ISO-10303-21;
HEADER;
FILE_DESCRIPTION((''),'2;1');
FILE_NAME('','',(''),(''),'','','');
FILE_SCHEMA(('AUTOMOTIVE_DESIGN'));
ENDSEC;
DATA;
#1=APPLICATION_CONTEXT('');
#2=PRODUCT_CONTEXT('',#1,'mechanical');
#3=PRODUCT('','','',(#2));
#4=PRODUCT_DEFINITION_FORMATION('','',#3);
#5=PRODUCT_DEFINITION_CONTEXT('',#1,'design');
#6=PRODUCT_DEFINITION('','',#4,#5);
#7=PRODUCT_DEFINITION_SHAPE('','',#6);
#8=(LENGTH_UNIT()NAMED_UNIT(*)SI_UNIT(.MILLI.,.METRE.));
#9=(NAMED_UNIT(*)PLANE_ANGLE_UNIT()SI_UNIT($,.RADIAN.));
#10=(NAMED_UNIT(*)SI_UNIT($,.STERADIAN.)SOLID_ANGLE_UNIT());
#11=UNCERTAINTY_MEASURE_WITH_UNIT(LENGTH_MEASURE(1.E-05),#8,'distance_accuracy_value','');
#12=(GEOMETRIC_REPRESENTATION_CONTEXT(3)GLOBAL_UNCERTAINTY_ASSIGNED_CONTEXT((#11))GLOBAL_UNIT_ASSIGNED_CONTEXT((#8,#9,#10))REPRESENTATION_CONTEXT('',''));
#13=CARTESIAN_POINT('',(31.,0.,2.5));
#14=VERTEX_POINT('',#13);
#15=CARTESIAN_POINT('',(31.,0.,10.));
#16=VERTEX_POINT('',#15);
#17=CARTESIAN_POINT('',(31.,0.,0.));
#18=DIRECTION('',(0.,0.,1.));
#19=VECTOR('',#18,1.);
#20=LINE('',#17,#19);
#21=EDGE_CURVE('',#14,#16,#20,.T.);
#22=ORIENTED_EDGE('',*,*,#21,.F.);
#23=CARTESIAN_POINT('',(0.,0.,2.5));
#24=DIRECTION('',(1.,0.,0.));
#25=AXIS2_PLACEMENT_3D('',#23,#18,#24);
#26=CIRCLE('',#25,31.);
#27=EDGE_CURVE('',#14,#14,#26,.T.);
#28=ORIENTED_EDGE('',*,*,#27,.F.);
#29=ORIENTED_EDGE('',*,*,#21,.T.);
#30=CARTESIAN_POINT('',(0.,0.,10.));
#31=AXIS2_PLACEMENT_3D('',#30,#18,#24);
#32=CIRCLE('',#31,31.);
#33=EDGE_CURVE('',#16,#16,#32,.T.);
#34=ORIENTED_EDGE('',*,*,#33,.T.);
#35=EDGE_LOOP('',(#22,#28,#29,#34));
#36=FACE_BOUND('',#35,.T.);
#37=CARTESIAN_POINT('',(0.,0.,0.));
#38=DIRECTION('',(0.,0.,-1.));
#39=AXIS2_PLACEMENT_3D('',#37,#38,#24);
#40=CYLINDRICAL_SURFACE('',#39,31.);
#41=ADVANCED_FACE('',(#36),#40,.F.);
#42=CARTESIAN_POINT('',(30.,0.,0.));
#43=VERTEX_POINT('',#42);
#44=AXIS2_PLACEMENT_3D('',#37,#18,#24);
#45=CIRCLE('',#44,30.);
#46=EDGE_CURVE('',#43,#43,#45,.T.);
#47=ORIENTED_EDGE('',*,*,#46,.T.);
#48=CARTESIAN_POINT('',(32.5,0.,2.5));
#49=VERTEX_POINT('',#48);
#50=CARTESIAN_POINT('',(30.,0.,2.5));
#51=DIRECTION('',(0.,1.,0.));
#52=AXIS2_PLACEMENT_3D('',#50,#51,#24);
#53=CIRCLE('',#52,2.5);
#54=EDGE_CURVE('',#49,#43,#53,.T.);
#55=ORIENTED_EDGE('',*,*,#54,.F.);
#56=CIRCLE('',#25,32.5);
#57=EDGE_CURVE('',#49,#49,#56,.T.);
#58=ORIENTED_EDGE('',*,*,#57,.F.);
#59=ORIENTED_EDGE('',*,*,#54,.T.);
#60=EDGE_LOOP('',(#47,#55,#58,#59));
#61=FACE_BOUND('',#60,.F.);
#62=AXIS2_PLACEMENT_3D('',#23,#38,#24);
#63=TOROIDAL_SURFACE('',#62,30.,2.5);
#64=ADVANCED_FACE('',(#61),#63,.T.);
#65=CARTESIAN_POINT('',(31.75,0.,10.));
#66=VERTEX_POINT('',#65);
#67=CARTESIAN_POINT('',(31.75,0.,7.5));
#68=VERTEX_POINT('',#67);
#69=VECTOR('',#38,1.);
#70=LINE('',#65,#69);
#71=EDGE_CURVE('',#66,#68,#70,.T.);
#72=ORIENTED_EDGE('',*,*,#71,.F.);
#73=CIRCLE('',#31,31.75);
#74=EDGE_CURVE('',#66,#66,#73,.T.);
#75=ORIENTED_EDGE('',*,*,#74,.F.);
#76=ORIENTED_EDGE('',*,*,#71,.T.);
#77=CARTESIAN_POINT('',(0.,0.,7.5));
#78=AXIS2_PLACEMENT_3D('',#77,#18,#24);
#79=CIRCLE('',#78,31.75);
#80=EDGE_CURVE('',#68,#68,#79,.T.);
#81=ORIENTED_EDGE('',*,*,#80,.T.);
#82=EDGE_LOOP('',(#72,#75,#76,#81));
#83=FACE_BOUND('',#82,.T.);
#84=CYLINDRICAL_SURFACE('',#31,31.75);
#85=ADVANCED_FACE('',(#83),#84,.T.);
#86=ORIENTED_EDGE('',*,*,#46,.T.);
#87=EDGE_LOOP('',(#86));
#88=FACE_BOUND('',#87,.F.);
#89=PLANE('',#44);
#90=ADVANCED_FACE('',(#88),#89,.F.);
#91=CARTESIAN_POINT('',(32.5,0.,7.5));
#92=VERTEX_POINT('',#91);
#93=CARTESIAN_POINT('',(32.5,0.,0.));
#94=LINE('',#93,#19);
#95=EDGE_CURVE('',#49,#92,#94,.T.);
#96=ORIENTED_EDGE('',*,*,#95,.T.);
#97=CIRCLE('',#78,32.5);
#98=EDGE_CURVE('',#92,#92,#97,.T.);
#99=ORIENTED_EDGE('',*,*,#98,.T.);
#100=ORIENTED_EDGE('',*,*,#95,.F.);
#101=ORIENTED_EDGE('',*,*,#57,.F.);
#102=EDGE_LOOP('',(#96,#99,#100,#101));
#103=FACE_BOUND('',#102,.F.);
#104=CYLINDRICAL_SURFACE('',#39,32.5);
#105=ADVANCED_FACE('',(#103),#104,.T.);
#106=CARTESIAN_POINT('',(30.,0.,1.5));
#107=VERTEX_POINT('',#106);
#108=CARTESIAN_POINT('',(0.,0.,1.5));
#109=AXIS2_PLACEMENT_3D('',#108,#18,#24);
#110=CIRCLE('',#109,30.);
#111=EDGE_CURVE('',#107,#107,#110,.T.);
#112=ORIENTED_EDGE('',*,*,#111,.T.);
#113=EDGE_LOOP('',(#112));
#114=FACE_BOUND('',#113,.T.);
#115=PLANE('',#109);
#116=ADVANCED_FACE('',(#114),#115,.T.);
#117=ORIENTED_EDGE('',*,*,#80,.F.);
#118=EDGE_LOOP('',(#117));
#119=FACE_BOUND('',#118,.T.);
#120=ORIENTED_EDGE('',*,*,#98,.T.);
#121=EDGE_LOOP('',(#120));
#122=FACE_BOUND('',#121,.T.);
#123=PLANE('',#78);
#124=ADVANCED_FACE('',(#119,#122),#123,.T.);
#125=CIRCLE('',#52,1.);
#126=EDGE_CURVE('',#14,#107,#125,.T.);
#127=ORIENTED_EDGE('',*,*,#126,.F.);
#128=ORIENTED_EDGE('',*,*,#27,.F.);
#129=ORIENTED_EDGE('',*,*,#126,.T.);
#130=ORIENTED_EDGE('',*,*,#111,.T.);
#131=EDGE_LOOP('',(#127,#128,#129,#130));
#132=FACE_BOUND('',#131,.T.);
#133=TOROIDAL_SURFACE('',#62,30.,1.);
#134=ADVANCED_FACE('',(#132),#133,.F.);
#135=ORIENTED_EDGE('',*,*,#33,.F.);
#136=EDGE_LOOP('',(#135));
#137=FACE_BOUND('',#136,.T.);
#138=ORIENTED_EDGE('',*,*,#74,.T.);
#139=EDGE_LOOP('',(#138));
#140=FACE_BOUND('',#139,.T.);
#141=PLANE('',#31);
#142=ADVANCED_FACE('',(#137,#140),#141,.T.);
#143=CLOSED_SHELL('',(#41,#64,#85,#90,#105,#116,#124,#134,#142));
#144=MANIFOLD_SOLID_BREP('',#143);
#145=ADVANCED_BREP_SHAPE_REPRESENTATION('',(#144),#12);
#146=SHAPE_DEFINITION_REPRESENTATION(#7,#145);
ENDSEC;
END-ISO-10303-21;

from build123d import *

# Parameters (mm, degrees)
F0_R     = 32.5
F1_DEPTH = 10
F2_R     = 2.5
F3_T     = -1.5
F4_R     = 32.5
F4_R_2   = 31.75
F5_DEPTH = 2.5


# Not quite as in the source:
# - a feature names something its author has since deleted; it is built from what else it names


with BuildPart() as f1:
    # F0 (on Top) → F1 (new body)
    with BuildSketch(Plane.XY):
        Circle(F0_R)
    extrude(amount=F1_DEPTH)

    # F2
    f2_edges = [f1.edges().sort_by_distance(p)[0] for p in [
        (-32.5, 0, 0),
    ]]
    fillet(f2_edges, radius=F2_R)

    # F3
    f3_openings = [f1.faces().sort_by_distance(p)[0] for p in [
        (0, 0, 10),
    ]]
    offset(amount=F3_T, openings=f3_openings)

    # F4 (on face) → F5 (cut)
    with BuildSketch(Plane.XY.offset(10)):
        Circle(F4_R)
        Circle(F4_R_2, mode=Mode.SUBTRACT)
    extrude(amount=-F5_DEPTH, mode=Mode.SUBTRACT)


solid = f1.part
